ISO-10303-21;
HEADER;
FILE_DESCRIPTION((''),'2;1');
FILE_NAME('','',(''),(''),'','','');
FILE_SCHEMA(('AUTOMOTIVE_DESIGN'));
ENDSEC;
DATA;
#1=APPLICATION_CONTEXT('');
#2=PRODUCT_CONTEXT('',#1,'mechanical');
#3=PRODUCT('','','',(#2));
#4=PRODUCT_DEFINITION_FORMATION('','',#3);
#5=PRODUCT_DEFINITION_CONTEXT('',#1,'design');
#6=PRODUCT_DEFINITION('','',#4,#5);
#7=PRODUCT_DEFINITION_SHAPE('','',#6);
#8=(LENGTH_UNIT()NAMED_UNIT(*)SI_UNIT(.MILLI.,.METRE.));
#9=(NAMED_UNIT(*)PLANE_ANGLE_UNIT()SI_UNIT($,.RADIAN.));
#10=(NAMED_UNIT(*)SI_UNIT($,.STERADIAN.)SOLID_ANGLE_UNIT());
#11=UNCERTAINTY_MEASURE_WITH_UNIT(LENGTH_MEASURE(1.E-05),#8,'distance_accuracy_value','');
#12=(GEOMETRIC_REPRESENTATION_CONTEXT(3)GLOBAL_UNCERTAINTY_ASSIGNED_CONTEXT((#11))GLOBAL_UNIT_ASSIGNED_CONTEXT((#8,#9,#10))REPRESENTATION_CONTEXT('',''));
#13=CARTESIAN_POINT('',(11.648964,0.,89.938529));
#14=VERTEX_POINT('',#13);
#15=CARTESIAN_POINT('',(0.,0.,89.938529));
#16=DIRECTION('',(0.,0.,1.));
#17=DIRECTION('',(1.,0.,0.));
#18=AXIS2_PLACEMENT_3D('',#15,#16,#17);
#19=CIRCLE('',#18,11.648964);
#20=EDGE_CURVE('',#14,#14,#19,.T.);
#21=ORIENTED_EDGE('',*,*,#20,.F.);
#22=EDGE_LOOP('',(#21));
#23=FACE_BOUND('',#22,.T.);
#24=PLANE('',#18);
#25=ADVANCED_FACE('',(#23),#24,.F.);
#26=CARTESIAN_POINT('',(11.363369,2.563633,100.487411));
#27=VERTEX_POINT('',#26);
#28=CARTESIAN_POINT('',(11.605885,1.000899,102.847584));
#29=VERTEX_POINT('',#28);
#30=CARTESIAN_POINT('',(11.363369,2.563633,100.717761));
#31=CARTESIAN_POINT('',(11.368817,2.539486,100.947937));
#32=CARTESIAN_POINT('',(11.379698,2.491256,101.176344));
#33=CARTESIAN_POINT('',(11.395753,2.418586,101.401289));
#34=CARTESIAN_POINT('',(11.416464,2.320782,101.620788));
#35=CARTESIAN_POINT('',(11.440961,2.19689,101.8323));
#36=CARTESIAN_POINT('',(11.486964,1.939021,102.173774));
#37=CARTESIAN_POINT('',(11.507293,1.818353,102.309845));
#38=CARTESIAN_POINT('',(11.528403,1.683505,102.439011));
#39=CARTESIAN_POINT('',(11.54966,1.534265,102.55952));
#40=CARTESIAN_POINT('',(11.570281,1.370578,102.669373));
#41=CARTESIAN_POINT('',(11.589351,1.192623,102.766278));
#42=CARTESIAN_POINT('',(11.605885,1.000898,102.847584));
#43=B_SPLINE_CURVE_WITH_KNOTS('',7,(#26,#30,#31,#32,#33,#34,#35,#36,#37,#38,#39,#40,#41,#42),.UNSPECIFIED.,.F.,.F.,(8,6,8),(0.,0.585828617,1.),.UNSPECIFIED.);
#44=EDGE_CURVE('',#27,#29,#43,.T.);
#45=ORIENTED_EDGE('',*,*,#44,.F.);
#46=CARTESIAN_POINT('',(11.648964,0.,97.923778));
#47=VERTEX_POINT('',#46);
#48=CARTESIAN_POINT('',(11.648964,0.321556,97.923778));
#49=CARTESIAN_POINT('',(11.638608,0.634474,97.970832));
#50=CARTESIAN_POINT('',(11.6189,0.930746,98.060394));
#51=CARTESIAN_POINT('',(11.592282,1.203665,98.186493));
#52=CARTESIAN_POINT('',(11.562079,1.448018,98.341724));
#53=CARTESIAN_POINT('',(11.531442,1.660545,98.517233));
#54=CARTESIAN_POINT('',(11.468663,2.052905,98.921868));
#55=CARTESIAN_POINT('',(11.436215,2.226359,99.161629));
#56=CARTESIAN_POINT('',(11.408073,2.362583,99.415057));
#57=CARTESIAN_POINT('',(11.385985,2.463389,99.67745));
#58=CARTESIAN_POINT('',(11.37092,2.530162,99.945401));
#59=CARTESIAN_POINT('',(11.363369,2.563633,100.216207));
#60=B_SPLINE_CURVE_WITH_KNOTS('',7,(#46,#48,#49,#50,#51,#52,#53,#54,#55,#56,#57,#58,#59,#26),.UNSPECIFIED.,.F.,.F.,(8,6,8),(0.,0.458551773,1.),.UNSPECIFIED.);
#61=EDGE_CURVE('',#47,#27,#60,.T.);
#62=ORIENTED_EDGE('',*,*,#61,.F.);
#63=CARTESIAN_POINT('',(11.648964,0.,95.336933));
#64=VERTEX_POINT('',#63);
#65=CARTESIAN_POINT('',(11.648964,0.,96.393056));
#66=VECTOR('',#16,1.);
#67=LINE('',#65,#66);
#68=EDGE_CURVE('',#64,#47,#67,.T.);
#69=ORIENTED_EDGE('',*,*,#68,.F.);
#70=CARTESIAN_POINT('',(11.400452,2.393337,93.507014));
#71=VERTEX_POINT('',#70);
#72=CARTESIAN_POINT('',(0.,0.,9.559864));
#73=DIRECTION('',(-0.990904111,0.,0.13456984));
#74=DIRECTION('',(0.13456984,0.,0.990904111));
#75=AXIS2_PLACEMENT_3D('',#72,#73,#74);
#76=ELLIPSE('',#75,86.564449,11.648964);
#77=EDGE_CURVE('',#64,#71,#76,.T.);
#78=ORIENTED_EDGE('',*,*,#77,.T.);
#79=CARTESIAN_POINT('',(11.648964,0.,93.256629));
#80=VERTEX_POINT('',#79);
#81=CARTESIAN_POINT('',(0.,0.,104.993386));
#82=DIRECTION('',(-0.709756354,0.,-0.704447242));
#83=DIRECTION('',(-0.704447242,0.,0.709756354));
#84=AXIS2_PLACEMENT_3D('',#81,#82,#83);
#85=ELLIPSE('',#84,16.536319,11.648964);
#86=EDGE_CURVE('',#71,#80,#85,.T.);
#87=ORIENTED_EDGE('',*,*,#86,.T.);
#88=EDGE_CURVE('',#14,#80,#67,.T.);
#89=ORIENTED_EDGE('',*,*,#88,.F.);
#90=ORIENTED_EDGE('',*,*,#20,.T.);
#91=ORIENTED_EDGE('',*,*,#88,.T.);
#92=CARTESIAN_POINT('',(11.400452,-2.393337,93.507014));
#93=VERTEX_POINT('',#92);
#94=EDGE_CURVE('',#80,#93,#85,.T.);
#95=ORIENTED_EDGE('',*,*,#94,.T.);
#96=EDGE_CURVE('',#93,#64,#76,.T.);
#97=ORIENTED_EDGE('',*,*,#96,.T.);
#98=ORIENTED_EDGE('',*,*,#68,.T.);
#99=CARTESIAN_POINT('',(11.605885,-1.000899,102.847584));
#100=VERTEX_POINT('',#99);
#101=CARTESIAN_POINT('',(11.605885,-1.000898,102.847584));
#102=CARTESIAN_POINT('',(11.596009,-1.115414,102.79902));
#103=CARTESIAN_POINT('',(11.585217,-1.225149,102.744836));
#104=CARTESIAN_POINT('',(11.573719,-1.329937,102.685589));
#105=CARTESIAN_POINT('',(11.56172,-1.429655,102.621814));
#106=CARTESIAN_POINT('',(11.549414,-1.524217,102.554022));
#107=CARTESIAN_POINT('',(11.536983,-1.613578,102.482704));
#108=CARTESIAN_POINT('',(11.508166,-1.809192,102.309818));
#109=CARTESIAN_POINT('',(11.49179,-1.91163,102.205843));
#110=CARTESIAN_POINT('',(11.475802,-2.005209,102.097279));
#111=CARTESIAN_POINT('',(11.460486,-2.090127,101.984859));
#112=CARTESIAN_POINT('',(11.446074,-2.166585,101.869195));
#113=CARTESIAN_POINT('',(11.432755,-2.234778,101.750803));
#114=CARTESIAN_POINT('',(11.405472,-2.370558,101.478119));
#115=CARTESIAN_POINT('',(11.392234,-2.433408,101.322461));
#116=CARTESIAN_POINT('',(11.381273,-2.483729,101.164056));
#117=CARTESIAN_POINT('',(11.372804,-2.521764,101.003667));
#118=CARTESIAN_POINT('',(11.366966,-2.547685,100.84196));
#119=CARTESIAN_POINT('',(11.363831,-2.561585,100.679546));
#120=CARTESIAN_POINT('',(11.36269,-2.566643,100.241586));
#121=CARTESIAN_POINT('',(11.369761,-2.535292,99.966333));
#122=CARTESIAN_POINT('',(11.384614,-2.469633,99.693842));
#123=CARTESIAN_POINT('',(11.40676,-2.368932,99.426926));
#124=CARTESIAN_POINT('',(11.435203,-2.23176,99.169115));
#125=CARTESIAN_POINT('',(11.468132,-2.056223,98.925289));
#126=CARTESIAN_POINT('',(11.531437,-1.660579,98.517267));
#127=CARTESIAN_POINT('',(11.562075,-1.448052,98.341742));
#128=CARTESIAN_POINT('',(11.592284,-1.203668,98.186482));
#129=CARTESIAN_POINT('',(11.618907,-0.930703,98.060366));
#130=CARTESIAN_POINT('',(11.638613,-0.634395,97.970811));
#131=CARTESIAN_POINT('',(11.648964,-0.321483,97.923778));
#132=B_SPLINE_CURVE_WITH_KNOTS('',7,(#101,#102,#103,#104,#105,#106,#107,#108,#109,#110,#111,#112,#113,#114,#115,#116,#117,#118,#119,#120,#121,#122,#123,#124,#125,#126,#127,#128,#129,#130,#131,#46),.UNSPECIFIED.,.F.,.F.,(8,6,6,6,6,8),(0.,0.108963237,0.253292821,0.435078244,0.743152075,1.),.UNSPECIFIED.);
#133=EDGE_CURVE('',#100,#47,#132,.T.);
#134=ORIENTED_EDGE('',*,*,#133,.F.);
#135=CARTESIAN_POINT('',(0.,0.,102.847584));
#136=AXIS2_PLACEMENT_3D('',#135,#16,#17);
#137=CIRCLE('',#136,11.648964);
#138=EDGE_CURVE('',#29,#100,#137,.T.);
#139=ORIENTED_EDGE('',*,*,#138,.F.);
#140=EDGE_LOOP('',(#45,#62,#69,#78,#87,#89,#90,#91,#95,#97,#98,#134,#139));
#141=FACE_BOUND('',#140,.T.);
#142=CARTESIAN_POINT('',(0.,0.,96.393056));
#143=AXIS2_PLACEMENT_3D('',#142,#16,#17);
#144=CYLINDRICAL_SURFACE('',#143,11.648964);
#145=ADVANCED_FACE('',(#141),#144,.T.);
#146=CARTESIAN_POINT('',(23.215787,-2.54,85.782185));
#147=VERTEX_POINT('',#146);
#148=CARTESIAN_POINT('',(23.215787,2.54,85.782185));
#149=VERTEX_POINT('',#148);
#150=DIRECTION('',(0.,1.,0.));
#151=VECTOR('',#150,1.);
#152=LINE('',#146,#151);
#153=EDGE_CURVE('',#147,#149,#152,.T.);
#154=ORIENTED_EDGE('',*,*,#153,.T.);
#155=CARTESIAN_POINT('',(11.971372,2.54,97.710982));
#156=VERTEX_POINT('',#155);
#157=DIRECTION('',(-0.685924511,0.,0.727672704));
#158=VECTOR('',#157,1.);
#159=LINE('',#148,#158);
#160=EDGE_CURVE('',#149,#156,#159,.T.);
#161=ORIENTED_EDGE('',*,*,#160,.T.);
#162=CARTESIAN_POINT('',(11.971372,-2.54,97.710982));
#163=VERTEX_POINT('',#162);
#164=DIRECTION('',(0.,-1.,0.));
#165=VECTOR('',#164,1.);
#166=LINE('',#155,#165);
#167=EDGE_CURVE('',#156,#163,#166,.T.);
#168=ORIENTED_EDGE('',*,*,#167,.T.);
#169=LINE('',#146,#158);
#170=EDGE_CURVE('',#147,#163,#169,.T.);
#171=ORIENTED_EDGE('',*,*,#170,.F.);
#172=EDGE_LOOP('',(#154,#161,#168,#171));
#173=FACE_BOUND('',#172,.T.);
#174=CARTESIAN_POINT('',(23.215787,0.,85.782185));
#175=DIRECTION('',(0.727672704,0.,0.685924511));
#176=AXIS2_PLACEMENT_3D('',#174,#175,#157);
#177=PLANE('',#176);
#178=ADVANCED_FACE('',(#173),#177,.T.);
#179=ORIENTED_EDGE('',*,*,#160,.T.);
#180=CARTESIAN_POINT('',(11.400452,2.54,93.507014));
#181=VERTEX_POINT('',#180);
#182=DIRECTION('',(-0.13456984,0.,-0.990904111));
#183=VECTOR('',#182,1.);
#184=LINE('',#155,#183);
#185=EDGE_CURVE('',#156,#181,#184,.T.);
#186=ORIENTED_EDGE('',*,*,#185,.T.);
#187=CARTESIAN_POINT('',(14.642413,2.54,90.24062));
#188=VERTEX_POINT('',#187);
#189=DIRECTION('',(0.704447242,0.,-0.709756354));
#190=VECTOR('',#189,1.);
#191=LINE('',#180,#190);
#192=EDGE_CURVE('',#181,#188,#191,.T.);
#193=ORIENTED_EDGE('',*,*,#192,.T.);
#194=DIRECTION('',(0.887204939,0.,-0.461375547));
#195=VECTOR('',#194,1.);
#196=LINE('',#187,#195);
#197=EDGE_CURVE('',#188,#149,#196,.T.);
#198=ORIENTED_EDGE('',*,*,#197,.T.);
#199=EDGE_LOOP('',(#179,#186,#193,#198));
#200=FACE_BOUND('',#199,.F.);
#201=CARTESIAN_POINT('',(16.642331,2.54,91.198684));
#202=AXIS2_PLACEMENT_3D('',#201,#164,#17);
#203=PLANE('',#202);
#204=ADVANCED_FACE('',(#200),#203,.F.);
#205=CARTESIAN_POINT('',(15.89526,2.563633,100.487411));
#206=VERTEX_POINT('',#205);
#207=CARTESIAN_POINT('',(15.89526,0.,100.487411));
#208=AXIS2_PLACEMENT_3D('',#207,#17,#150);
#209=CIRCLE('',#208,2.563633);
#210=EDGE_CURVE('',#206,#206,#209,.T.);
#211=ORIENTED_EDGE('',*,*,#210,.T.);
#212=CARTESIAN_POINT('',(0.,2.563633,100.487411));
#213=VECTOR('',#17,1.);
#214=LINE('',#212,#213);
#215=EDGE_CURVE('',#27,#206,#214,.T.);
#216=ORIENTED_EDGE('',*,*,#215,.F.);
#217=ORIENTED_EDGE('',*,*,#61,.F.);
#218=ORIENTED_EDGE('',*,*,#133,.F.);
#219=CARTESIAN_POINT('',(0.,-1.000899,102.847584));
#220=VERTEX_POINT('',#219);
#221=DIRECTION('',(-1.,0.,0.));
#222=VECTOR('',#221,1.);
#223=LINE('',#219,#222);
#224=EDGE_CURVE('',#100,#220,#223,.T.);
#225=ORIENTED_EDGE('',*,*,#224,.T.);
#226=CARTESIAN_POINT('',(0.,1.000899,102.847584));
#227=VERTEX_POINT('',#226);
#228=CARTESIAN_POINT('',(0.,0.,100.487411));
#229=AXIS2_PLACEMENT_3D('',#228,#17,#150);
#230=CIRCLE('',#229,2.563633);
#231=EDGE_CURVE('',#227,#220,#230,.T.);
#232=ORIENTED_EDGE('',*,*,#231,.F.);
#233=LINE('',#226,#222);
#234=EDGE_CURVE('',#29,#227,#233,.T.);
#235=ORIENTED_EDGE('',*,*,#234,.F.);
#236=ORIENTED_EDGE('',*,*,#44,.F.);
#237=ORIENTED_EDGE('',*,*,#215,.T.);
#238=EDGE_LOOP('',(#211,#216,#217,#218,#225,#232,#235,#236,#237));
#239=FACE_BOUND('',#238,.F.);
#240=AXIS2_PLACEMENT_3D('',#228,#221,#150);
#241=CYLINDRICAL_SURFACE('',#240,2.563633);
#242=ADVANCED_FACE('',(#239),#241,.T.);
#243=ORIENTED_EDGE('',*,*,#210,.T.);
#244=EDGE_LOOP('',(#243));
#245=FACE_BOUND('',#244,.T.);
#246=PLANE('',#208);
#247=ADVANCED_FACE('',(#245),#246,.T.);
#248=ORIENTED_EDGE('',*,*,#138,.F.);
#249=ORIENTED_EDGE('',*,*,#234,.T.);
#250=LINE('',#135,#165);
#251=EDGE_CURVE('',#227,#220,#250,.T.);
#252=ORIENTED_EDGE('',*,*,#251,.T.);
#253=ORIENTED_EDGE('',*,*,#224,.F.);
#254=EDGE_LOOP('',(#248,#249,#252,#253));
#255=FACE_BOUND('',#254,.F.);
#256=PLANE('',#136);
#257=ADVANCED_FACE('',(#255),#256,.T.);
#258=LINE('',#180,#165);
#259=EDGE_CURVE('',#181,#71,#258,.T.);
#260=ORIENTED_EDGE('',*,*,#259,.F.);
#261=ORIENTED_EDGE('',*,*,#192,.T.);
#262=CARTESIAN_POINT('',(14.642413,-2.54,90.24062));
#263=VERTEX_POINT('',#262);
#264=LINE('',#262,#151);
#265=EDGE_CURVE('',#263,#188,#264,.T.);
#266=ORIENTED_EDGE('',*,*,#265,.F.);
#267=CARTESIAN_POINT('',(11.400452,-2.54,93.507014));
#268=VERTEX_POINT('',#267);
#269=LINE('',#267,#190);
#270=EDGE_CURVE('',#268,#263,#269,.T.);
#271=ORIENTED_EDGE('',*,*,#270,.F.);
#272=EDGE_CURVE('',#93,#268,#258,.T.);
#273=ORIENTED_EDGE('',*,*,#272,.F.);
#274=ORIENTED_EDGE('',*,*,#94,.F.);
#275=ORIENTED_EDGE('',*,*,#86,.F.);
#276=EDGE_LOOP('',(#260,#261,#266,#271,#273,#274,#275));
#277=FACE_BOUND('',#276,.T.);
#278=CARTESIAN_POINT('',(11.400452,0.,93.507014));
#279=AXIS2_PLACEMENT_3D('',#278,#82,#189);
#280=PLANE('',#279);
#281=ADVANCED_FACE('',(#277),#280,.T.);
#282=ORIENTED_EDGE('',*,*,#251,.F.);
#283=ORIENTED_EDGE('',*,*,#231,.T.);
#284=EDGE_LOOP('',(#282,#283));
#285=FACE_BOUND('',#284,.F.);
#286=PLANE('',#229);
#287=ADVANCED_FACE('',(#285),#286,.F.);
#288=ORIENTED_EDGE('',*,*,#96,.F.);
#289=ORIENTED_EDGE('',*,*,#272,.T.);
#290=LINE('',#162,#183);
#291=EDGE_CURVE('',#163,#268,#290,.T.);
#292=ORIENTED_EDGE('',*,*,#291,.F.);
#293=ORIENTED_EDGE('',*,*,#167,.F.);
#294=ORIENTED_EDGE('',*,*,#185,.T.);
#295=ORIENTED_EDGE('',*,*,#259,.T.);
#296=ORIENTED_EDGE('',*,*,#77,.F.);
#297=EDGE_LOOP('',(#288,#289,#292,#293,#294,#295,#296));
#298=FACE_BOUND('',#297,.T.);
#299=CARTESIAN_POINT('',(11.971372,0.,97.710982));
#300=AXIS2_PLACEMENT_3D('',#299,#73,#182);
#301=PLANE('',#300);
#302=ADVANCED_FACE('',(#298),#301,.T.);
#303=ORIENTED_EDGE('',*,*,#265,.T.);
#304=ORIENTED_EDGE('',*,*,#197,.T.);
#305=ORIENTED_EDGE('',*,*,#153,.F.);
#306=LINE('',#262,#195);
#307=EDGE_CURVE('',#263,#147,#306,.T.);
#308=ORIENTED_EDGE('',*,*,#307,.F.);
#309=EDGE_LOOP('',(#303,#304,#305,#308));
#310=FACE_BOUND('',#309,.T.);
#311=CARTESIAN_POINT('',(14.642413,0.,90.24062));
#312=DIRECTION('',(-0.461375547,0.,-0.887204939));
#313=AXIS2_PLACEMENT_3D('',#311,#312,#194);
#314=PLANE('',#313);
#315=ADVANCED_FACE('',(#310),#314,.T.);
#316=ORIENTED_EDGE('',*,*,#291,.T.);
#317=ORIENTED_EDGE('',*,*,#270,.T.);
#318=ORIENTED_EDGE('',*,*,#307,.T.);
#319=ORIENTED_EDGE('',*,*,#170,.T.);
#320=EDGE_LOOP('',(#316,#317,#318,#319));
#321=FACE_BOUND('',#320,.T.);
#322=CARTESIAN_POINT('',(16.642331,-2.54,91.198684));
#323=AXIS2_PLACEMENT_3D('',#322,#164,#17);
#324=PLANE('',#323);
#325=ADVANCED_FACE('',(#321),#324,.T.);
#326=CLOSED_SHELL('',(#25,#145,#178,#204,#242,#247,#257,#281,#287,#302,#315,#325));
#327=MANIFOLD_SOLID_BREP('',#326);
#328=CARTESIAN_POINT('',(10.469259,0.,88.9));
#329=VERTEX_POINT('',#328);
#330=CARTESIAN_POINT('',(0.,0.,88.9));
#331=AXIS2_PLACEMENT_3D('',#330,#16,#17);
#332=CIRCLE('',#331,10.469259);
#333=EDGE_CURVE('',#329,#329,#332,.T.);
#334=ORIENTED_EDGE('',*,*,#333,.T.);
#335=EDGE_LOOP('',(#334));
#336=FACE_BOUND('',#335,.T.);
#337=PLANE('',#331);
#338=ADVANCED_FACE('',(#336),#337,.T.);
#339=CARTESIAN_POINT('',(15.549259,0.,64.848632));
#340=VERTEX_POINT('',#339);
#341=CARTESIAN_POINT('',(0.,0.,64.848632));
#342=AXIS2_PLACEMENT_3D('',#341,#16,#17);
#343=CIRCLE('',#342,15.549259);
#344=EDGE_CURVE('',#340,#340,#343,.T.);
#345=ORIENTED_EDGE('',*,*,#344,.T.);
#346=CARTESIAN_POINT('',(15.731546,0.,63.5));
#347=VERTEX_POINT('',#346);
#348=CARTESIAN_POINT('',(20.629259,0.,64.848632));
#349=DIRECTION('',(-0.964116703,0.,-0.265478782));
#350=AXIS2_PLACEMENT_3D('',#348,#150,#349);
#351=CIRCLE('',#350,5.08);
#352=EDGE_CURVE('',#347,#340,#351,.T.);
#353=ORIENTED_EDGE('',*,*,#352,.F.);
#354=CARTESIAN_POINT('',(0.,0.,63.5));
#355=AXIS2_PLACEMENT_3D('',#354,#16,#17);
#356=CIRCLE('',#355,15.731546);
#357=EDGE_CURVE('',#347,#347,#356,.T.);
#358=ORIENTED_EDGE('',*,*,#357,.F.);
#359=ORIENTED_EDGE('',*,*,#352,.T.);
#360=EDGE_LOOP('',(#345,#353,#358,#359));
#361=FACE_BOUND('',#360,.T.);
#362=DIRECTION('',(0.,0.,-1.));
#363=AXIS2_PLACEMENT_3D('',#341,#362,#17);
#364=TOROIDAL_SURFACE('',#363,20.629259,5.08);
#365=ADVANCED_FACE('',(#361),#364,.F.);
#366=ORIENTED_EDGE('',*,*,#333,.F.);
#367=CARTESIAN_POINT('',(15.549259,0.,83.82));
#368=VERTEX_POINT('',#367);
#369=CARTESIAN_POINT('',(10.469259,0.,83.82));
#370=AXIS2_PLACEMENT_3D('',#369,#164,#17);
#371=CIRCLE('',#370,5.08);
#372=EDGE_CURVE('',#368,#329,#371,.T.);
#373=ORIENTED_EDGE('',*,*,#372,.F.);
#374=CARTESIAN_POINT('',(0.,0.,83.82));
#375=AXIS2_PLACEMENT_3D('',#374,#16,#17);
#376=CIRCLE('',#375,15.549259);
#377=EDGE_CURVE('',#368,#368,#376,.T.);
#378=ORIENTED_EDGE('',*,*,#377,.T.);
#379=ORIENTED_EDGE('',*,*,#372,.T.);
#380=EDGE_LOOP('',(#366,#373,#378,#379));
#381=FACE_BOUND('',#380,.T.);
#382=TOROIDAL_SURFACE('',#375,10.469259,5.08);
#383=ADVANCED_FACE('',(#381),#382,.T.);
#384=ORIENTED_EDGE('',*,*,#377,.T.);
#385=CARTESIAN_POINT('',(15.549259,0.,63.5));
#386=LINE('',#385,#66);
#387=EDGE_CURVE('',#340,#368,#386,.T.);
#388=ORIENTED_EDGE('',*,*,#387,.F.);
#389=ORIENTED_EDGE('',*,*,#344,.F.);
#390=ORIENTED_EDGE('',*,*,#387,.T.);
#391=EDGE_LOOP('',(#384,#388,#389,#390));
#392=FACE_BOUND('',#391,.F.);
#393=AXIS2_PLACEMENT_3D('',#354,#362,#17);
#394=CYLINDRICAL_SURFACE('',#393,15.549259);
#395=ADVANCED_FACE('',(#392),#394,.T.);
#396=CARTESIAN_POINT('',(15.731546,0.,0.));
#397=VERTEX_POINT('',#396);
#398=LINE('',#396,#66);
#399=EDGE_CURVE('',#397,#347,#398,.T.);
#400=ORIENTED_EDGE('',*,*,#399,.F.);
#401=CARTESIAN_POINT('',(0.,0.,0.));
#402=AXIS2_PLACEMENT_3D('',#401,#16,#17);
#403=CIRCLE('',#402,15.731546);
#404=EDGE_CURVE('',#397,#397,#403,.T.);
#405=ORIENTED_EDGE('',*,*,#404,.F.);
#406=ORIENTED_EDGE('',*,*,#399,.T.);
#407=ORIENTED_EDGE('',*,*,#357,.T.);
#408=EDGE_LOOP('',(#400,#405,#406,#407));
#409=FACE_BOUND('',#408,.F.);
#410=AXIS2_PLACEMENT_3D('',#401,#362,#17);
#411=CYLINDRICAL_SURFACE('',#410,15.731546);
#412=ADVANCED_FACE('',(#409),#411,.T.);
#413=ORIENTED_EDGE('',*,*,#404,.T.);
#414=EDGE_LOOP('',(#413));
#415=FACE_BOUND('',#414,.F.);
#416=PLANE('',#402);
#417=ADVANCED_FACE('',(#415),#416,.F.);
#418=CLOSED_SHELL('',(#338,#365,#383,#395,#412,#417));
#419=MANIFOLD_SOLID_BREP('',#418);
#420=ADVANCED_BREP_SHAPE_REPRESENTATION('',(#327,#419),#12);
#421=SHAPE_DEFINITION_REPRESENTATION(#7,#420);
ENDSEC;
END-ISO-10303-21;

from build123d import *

# Parameters (mm, degrees)
F0_R      = 15.7315457011
F1_DEPTH  = 63.5
F2_R      = 15.5492585508
F3_DEPTH  = 25.4
F5_W      = 11.6489641368
F5_H      = 12.9090547562
F8_DEPTH  = 2.54
F9_R      = 2.5636330247
F10_DEPTH = 15.89526


# Not quite as in the source:
# - a fillet or chamfer that OpenCascade refuses, or shapes differently, is made with other operations: its cross-section is extruded or revolved along the edge and cut away or added


with BuildPart() as f1:
    # F0 (on Top) → F1 (new body)
    with BuildSketch(Plane.XY):
        Circle(F0_R)
    extrude(amount=F1_DEPTH)

    # F2 (on face) → F3 (join)
    with BuildSketch(Plane.XY.offset(63.5)):
        Circle(F2_R)
    extrude(amount=F3_DEPTH)

    # F4: fillet of radius 5.08 on 3 edges, made by hand

    # F4_s1 → F4_t2 (revolve, cut)
    with BuildSketch(Plane.XZ):
        with BuildLine():
            ThreePointArc((15.5492585508, 83.82), (14.0613609992, 87.4121024484), (10.4692585508, 88.9))
            Line((10.4692585508, 88.9), (10.4692585508, 89.0016))
            Line((10.4692585508, 89.0016), (15.6508585508, 89.0016))
            Line((15.6508585508, 89.0016), (15.6508585508, 83.82))
            Line((15.6508585508, 83.82), (15.5492585508, 83.82))
        make_face()
    revolve(axis=Axis((0, 0, 88.9), (0, 0, 1)), mode=Mode.SUBTRACT)

    # F4_s3 → F4_t4 (revolve)
    with BuildSketch(Plane.XZ):
        with BuildLine():
            ThreePointArc((15.7315457011, 63.5), (15.5950366011, 64.1681842989), (15.5492585508, 64.8486322115))
            Line((15.5492585508, 64.8486322115), (15.4476585508, 64.8486322115))
            Line((15.4476585508, 64.8486322115), (15.4476585508, 63.5))
            Line((15.4476585508, 63.5), (15.5492585508, 63.3984))
            ThreePointArc((15.5492585508, 63.3984), (15.6404021259, 63.3984), (15.6335914441, 63.4730273558))
            Line((15.6335914441, 63.4730273558), (15.7315457011, 63.5))
        make_face()
    revolve(axis=Axis((0, 0, 63.5), (0, 0, 1)))


with BuildPart() as f6:
    # F5 (on Front) → F6 (revolve)
    with BuildSketch(Plane.XZ):
        with Locations((5.8244820684, 96.3930562139)):
            Rectangle(F5_W, F5_H)
    revolve(axis=Axis((0, 0, 102.8475835919), (0, 0, 1)))

    # F7 (on Front) → F8 (join, symmetric)
    with BuildSketch(Plane.XZ):
        Polygon((23.2157874852, 85.7821851969), (11.9713721797, 97.7109819651), (11.4004518837, 93.507014215), (14.6424127743, 90.2406200767), align=None)
    extrude(amount=F8_DEPTH, both=True)

    # F9 (on Right) → F10 (join)
    with BuildSketch(Plane.YZ):
        with Locations((0, 100.4874110222)):
            Circle(F9_R)
    extrude(amount=F10_DEPTH)


solid = Compound([f1.part, f6.part])
